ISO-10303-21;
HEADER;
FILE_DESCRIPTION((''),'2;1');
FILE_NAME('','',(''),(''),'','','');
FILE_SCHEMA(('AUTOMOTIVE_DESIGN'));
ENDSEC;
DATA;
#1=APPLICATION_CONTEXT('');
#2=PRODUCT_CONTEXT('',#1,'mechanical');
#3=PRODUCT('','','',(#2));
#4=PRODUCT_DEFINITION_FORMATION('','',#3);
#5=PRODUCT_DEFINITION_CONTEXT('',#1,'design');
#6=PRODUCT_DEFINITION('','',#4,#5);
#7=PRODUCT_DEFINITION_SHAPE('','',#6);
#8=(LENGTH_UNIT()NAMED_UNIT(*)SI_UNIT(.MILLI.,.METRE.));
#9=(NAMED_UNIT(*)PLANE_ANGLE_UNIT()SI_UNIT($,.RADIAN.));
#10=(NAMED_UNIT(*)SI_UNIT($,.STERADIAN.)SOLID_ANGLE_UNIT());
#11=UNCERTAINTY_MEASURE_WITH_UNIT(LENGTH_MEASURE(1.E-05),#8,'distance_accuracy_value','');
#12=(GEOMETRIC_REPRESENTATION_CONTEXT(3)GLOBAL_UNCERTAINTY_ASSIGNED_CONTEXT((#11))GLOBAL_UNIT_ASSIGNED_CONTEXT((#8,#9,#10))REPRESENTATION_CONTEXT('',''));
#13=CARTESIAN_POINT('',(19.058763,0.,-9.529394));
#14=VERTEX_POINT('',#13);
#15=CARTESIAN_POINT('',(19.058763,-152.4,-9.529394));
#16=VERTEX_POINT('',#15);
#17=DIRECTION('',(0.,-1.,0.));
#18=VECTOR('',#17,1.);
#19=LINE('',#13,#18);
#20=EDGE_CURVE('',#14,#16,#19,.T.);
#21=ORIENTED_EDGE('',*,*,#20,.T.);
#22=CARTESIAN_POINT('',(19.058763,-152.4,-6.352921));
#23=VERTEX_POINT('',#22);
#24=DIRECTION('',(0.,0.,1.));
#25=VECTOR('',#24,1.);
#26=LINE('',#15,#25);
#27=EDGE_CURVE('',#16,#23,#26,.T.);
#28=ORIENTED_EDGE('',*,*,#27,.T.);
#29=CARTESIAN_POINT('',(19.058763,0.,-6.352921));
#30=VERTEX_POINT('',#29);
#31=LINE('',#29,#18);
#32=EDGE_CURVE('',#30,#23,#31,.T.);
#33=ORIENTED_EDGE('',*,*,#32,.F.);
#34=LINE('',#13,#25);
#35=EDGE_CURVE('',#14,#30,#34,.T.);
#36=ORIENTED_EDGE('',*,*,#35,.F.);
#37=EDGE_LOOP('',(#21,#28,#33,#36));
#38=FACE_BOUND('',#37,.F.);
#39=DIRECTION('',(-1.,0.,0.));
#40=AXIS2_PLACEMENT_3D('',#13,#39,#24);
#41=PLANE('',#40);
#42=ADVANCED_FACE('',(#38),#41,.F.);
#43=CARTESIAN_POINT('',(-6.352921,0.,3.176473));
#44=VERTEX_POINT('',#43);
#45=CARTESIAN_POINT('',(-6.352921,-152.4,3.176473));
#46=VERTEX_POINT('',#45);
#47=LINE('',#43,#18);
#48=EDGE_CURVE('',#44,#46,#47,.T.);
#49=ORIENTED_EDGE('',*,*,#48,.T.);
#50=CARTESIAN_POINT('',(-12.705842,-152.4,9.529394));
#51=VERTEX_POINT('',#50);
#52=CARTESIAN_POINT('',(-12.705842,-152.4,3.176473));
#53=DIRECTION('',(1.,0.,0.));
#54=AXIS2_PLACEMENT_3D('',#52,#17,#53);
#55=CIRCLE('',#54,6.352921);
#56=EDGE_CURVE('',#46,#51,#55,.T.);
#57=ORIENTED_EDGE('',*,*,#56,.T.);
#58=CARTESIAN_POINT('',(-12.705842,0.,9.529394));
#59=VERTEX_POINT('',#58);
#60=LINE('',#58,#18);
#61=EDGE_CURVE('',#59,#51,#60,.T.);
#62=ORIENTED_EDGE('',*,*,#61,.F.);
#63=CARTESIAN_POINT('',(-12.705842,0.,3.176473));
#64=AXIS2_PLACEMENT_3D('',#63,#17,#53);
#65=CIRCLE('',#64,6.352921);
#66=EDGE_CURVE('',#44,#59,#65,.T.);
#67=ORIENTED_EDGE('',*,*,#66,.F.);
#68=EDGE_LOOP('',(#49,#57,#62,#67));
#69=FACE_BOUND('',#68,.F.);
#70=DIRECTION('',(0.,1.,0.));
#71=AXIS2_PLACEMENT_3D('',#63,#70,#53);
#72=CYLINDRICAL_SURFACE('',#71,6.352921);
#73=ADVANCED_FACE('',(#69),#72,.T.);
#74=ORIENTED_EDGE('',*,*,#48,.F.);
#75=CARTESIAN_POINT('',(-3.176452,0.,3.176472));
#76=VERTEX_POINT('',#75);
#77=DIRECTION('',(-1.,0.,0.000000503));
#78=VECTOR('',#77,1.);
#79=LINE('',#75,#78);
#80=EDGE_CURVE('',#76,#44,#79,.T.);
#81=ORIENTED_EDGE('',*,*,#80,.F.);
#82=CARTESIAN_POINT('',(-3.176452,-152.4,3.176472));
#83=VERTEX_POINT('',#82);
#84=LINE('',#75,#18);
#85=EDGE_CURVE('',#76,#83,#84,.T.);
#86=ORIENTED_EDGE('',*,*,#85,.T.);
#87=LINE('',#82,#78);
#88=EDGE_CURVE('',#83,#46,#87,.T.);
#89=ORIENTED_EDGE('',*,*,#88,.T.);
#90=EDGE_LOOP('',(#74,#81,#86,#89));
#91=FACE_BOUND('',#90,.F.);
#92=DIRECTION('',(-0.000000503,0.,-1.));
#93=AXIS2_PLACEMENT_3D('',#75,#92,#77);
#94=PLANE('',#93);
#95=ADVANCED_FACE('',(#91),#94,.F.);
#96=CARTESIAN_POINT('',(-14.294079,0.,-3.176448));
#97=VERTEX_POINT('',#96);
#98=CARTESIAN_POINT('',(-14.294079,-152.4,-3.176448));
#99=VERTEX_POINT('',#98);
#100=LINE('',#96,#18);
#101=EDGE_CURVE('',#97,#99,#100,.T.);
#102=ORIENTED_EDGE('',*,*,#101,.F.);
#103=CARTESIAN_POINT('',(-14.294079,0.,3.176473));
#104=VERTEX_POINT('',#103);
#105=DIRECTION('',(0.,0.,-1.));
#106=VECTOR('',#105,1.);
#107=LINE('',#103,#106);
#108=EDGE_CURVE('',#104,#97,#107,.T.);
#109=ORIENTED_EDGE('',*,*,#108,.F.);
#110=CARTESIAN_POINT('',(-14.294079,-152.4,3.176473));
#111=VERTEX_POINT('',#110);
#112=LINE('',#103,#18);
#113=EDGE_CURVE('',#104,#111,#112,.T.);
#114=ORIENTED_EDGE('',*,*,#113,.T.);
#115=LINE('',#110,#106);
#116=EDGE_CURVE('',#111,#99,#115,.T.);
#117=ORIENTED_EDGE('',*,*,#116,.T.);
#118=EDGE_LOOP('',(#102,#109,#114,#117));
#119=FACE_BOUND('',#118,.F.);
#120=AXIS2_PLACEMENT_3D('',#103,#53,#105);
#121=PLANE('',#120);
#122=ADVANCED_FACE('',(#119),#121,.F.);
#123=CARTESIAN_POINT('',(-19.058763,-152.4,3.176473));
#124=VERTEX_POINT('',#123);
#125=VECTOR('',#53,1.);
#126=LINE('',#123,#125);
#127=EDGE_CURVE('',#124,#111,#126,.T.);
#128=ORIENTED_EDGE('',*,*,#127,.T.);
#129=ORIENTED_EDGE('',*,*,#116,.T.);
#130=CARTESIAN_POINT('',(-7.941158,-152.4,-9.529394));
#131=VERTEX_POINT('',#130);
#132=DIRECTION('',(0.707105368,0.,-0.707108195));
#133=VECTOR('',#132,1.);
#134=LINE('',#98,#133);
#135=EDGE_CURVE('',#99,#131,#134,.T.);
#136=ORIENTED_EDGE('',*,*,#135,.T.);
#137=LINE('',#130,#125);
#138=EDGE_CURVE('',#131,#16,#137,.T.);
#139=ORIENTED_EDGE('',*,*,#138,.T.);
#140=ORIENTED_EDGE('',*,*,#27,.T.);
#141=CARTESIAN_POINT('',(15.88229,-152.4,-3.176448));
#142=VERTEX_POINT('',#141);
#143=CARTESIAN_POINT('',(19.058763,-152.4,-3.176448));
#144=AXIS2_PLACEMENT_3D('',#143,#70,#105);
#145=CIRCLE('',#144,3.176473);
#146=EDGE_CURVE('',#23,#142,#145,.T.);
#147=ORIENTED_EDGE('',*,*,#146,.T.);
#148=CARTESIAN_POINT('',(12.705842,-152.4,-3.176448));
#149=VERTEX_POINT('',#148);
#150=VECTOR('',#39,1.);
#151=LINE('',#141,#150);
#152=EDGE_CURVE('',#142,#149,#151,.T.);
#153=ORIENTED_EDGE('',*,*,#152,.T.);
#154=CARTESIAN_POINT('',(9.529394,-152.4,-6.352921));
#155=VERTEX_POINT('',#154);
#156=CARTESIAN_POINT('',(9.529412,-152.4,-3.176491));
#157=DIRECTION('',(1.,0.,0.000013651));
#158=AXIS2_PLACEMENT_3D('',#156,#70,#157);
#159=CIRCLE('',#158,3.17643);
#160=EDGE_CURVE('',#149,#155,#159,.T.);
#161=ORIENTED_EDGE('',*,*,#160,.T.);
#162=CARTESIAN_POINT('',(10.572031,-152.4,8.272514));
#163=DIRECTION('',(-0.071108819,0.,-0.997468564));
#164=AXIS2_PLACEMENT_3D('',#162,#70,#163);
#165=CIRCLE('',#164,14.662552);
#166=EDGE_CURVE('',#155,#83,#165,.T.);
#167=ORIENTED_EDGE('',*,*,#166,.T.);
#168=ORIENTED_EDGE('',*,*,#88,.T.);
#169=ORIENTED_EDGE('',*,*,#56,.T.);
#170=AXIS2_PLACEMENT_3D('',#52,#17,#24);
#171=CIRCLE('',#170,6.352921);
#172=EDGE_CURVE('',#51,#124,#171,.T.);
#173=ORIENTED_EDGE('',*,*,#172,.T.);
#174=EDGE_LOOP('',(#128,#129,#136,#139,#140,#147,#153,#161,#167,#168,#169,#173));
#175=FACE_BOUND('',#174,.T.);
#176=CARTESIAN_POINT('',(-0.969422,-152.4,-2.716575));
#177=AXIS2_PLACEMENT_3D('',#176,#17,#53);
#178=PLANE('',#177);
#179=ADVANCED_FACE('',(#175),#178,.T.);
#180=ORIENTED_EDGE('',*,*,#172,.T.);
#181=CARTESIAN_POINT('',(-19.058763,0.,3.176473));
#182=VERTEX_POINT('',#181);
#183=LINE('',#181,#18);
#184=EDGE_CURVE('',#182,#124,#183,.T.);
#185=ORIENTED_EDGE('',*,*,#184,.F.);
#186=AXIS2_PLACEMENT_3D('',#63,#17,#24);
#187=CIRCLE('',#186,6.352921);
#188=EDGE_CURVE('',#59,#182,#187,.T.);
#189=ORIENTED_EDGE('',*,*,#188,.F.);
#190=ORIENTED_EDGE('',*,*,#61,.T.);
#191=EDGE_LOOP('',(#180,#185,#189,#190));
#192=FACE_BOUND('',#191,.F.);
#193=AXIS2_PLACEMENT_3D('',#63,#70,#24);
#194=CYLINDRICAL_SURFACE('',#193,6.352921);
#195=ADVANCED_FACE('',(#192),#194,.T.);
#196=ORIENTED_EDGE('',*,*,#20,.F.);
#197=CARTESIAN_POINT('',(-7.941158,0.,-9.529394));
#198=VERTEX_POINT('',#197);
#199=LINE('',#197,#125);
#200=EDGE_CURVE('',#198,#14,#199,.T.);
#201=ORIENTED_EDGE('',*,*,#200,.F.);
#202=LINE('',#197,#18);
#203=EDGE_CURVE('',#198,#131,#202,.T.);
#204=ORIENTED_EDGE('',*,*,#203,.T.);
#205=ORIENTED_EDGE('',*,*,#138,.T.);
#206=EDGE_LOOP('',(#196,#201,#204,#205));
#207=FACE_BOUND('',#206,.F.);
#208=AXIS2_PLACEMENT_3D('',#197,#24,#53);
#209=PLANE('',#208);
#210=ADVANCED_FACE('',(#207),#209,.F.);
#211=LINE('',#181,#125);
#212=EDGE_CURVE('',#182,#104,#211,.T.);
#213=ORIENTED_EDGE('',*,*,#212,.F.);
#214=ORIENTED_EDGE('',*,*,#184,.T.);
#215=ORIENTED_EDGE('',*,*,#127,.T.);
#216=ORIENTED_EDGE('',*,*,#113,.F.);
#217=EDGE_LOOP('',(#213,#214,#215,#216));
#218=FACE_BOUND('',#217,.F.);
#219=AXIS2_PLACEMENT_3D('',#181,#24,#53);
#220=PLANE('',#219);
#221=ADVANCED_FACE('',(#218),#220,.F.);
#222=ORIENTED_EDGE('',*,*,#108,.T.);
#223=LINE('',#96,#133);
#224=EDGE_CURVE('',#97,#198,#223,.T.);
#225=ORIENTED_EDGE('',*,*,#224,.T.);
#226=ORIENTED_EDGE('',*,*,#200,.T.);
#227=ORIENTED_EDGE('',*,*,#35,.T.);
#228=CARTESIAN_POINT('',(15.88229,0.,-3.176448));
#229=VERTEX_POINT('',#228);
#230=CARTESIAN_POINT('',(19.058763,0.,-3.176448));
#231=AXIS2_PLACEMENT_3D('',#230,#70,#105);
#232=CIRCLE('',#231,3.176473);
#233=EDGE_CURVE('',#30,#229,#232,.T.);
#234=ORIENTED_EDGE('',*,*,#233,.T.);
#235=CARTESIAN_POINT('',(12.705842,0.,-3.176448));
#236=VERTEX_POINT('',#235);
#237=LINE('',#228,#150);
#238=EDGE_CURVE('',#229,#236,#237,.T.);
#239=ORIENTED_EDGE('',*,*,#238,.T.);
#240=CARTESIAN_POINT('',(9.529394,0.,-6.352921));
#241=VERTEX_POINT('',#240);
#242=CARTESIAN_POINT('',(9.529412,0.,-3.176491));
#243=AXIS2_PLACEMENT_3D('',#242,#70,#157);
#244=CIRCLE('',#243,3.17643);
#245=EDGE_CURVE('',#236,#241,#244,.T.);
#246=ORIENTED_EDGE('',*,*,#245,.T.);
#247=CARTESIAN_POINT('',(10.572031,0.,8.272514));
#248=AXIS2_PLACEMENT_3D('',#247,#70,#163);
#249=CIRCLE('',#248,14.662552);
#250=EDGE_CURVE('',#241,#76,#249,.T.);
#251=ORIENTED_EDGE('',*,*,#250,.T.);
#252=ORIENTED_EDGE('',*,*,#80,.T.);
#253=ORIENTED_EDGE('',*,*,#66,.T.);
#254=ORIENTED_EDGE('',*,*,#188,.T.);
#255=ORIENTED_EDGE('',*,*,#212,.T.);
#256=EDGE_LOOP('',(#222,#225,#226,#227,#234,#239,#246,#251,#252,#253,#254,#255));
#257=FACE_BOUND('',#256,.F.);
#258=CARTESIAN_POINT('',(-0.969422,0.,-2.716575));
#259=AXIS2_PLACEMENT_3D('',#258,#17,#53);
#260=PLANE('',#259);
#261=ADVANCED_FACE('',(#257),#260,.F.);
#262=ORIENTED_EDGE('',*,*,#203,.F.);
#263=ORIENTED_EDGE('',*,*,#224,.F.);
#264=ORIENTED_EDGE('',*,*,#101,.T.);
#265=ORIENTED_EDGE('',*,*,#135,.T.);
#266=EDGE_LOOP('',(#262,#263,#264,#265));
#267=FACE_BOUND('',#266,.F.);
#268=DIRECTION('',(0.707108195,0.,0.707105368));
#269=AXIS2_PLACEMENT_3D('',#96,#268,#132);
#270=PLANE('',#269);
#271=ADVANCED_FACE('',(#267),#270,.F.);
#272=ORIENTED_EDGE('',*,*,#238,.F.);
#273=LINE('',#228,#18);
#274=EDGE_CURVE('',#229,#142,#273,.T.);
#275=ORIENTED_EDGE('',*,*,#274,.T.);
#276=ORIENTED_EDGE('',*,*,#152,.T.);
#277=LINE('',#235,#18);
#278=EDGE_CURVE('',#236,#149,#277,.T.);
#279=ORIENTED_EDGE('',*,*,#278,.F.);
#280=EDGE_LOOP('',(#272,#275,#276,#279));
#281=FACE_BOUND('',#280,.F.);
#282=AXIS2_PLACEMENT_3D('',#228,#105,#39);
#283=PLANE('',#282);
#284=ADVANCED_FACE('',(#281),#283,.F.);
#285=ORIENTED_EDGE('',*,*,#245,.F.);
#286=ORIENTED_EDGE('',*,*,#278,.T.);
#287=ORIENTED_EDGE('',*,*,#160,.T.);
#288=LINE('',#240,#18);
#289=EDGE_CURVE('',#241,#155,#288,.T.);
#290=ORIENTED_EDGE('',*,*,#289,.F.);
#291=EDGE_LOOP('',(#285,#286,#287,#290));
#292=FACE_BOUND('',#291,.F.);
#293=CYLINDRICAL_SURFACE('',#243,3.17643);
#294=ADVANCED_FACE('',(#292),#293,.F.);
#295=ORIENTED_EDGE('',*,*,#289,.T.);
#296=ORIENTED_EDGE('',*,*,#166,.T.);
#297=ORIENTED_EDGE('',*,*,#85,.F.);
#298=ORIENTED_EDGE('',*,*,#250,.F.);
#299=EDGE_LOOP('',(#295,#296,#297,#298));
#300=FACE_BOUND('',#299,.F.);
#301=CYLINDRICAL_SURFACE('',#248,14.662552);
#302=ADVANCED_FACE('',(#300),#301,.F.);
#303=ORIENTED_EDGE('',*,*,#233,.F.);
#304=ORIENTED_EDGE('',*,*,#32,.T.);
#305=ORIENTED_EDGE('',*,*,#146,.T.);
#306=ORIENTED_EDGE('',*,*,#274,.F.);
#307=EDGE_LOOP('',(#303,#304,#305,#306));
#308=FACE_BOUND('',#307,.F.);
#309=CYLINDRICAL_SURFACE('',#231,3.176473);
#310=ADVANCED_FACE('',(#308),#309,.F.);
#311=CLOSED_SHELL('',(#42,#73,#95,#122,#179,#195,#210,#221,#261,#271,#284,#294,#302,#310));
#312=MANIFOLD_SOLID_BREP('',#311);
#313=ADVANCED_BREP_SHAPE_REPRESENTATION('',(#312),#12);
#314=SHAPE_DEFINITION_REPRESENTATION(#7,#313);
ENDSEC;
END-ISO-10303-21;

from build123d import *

# Parameters (mm, degrees)
F1_DEPTH = 152.4


# Not quite as in the source:
# - ends of sketch curves that miss each other by under 0.0002 mm in the source are joined


with BuildPart() as f1:
    # F0 (on Front) → F1 (new body)
    with BuildSketch(Plane.XZ):
        with BuildLine():
            ThreePointArc((-6.352921, 3.1764732), (-8.2136484806, 7.6686667194), (-12.705842, 9.5293942))
            ThreePointArc((-12.705842, 9.5293942), (-17.1980355194, 7.6686667194), (-19.058763, 3.1764732))
            Line((-19.058763, 3.1764732), (-14.2940786, 3.1764732))
            Line((-14.2940786, 3.1764732), (-14.2940786, -3.1764478))
            Line((-14.2940786, -3.1764478), (-7.9411576, -9.5293942))
            Line((-7.9411576, -9.5293942), (19.058763, -9.5293942))
            Line((19.058763, -9.5293942), (19.058763, -6.352921))
            ThreePointArc((19.058763, -6.352921), (16.81265726, -5.42255354), (15.8822898, -3.1764478))
            Line((15.8822898, -3.1764478), (12.705842, -3.1764478))
            ThreePointArc((12.705842, -3.1764478), (11.77549994, -5.42255354), (9.5293942, -6.352921))
            ThreePointArc((9.5293942, -6.352921), (1.7744943071, -3.4575238304), (-3.1764521069, 3.1764716036))
            Line((-3.1764521069, 3.1764716036), (-6.352921, 3.1764732))
        make_face()
    extrude(amount=F1_DEPTH)


solid = f1.part
